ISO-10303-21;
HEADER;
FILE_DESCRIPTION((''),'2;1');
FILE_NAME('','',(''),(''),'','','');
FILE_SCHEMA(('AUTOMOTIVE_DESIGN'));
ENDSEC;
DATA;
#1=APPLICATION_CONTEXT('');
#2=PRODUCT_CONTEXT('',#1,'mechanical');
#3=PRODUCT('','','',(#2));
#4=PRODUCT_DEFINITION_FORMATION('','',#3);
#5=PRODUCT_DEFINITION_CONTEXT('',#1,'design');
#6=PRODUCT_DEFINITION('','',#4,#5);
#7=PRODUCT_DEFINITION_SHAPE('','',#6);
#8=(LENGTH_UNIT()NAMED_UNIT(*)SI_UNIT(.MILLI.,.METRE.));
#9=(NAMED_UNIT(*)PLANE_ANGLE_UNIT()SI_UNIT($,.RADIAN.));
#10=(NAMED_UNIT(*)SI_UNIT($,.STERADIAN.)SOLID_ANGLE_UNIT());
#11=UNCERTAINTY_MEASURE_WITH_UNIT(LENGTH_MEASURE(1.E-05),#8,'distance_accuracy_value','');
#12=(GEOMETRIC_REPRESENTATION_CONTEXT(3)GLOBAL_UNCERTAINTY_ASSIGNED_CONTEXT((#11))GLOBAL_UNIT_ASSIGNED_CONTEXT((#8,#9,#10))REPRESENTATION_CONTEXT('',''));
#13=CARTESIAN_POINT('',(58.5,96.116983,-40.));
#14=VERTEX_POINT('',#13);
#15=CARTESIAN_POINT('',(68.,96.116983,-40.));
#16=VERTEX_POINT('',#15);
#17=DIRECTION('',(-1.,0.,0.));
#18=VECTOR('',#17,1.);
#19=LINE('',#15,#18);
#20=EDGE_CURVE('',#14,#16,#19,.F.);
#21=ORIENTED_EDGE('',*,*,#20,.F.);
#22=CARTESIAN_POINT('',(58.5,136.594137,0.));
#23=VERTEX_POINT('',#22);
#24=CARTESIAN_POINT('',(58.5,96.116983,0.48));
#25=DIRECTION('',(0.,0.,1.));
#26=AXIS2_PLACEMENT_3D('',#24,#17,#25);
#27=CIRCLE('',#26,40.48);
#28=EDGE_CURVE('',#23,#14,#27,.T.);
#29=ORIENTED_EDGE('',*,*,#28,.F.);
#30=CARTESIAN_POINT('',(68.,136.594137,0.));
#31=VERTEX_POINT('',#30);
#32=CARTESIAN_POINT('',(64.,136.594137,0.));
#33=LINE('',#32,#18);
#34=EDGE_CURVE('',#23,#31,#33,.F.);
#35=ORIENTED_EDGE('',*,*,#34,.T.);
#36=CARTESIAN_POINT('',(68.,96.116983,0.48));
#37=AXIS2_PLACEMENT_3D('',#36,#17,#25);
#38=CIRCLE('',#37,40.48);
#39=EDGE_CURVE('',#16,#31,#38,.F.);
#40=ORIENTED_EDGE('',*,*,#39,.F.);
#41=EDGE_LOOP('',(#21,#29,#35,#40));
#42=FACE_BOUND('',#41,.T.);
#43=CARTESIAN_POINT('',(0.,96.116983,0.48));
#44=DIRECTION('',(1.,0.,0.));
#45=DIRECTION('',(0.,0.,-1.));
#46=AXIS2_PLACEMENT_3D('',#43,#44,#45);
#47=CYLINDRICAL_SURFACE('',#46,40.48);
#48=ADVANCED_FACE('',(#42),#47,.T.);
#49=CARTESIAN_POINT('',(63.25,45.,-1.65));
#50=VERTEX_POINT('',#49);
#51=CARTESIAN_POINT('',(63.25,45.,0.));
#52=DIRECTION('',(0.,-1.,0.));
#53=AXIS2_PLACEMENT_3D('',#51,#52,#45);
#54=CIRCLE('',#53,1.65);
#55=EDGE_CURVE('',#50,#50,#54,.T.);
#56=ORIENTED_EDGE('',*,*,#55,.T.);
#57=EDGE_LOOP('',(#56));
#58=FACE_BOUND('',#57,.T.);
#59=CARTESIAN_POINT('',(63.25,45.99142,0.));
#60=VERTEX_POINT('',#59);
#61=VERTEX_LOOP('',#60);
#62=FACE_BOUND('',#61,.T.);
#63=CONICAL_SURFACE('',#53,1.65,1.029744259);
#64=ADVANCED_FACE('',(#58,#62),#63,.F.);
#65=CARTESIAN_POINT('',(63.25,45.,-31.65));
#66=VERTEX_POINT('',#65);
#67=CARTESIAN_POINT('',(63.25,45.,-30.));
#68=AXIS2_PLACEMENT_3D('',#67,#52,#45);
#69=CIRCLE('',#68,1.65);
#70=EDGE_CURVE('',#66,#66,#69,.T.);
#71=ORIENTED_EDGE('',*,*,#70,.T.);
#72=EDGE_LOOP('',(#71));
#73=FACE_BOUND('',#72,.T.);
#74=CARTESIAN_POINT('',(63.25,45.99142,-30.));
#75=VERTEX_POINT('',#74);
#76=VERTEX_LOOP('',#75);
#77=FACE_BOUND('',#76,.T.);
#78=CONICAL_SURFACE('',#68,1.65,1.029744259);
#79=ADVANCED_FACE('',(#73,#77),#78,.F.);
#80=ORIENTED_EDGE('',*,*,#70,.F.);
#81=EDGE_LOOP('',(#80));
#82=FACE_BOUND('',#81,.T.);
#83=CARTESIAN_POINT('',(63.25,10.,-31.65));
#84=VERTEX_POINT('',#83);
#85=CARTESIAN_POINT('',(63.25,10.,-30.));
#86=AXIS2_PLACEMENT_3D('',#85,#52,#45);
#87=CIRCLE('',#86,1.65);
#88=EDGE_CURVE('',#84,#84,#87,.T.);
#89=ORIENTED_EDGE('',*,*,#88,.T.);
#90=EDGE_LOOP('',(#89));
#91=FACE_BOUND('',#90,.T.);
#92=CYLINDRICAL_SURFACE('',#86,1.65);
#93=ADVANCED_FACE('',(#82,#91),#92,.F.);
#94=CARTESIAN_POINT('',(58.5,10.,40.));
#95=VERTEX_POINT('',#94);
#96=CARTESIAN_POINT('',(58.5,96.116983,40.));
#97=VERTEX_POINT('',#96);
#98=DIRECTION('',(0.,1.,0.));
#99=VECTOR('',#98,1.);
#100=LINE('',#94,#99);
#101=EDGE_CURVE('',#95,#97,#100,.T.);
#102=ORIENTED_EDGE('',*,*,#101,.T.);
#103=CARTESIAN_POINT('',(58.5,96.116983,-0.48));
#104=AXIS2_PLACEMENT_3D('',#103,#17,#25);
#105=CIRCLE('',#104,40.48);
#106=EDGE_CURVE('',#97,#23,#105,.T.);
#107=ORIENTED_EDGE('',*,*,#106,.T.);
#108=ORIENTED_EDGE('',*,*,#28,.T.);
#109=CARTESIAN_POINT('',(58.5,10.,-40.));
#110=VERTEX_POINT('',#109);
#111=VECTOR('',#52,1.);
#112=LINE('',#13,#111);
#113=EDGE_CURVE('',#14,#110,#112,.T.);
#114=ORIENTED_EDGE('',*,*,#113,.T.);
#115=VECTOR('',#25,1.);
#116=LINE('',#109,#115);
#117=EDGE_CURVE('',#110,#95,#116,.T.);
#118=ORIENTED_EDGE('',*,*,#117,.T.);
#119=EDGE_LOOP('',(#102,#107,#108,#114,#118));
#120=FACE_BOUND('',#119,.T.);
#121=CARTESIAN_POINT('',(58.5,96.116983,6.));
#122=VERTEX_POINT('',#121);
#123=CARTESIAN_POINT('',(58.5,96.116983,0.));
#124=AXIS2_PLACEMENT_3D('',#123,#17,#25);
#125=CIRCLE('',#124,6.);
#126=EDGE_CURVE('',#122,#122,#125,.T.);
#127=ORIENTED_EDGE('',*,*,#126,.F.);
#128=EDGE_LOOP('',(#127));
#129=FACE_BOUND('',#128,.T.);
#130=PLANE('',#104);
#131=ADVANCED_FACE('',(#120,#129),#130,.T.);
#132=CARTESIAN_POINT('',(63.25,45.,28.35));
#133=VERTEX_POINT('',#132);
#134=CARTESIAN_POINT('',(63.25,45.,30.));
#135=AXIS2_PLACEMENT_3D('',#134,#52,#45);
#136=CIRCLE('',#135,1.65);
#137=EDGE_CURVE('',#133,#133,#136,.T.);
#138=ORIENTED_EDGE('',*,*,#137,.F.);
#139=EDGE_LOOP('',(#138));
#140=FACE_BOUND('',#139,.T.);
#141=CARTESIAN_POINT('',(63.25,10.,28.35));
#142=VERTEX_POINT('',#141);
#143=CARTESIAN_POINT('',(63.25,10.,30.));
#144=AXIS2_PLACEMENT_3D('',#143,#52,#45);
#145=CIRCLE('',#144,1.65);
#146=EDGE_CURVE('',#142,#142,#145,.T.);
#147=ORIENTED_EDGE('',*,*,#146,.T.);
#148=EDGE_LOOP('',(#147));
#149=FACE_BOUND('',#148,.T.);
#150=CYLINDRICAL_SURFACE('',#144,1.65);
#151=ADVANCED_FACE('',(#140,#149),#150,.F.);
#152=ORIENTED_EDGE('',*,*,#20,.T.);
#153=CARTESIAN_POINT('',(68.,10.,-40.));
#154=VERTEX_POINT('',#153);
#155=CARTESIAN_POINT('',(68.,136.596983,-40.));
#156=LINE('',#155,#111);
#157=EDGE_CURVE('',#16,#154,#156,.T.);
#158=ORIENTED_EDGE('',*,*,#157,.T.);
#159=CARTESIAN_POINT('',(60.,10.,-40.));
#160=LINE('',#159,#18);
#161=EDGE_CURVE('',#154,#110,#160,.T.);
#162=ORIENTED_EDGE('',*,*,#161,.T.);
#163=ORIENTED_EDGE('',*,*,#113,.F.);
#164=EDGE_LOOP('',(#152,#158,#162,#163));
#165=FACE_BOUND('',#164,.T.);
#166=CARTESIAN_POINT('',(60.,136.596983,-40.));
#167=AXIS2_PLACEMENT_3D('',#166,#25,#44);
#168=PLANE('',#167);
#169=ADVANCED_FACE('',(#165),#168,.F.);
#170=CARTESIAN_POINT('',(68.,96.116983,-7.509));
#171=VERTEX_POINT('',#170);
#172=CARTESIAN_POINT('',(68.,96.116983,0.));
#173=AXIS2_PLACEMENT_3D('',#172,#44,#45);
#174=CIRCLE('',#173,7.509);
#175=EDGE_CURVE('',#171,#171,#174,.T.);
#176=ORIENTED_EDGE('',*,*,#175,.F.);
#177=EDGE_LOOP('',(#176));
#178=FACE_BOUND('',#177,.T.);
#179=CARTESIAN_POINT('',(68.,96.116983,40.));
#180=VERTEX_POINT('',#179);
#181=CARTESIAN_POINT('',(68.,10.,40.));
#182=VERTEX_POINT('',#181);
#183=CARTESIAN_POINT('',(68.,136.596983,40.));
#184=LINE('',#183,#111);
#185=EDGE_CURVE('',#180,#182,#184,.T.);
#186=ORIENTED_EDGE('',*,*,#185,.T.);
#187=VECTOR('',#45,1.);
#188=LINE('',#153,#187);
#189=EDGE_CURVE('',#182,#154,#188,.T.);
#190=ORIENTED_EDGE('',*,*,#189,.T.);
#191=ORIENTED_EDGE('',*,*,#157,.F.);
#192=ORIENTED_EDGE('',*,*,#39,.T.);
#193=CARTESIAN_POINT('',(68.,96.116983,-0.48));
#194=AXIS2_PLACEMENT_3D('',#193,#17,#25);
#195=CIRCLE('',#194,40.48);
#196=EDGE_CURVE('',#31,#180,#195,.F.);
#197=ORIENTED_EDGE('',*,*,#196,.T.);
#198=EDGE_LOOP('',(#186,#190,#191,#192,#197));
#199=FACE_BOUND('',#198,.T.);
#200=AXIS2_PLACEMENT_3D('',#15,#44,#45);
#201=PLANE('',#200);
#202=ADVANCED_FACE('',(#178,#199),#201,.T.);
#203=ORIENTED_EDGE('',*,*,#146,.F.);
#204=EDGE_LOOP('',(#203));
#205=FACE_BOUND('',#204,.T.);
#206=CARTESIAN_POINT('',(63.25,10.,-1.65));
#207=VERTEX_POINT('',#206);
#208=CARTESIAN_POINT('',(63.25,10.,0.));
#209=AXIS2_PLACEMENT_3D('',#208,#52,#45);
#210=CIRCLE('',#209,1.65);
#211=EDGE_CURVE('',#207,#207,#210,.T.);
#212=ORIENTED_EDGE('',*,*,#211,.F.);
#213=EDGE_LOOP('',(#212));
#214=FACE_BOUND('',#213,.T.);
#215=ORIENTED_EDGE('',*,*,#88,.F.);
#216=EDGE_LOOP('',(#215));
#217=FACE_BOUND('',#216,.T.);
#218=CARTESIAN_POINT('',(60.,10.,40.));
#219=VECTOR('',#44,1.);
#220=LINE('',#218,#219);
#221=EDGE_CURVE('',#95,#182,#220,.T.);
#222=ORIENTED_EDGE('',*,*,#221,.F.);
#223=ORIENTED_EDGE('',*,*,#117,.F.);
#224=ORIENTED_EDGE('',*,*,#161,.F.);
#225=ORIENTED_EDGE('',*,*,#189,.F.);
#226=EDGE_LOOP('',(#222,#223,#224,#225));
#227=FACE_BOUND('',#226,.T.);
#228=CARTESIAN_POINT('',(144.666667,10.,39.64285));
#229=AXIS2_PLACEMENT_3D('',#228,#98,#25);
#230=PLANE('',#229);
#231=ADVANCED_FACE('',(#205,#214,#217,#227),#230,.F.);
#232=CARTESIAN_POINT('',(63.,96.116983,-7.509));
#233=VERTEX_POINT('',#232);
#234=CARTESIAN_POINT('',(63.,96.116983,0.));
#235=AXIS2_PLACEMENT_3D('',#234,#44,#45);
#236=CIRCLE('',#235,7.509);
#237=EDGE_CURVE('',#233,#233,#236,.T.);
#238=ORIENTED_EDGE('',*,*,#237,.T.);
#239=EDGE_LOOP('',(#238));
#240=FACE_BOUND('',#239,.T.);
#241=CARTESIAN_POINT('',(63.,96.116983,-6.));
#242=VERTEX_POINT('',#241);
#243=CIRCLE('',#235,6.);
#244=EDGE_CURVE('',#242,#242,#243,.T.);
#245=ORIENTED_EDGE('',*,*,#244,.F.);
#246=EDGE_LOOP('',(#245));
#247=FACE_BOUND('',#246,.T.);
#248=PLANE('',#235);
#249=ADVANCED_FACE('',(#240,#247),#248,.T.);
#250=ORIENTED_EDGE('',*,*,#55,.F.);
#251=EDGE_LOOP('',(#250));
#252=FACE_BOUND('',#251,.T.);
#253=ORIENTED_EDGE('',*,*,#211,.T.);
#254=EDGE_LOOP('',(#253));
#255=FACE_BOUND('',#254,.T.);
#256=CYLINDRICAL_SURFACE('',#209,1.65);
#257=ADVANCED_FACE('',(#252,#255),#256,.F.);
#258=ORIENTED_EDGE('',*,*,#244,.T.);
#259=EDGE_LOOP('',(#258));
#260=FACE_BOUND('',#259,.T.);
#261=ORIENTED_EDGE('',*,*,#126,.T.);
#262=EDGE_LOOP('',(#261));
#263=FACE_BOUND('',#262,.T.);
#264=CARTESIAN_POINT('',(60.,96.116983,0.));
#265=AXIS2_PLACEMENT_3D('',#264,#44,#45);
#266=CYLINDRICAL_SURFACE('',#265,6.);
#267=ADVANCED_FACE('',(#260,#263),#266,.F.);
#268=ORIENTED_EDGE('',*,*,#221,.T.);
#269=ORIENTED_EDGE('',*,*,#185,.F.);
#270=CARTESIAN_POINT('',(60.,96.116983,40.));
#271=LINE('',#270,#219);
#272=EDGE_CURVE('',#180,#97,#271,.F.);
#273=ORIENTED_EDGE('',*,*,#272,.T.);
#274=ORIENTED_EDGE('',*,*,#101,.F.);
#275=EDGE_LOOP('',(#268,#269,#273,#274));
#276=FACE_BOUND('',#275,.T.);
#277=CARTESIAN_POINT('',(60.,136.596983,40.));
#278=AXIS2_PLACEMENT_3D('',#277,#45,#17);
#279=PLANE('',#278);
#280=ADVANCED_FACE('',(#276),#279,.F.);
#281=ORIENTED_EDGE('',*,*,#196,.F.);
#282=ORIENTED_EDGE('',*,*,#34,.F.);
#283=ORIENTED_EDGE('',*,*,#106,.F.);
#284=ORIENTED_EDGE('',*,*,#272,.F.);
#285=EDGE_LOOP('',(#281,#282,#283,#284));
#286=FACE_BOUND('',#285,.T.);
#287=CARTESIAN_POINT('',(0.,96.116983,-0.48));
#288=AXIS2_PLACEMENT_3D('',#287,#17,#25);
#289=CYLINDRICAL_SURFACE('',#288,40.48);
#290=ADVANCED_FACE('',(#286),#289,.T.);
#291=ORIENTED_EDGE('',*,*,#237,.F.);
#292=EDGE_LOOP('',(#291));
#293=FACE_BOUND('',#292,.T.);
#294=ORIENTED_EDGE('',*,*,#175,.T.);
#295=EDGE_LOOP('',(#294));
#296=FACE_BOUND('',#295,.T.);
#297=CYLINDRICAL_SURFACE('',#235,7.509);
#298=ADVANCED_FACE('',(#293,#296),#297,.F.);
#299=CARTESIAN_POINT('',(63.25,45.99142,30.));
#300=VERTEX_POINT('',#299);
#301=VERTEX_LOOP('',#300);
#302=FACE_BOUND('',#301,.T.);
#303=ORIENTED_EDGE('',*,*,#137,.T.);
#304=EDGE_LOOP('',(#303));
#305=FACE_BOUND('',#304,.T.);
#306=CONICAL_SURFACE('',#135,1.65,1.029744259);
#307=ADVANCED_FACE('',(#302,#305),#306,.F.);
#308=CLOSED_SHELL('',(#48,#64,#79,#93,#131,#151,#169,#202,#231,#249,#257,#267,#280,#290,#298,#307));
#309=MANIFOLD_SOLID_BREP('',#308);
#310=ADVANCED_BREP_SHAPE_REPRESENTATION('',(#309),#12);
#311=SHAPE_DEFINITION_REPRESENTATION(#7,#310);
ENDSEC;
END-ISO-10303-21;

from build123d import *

# Parameters (mm, degrees)
STOCK_NEW_TRACKER_1_START = 60
STOCK_NEW_TRACKER_1_DEPTH = 8
SKETCH1_R                 = 7.509
CUT_EXTRUDE1_DEPTH        = 5
SKETCH2_R                 = 6
CUT_EXTRUDE2_DEPTH        = 143.418251296
BOSS_EXTRUDE1_START       = 1.5
SKETCH6_R                 = 6
BOSS_EXTRUDE1_DEPTH       = 1.5
M4X0_7_TAPPED_HOLE1_D     = 3.3
M4X0_7_TAPPED_HOLE1_DEPTH = 35
M4X0_7_TAPPED_HOLE1_TIP   = 0.991420021


# Read off the part's stored shape, not the designer's step: Stock-New_Tracker-1
with BuildPart() as part:
    # Stock-New_Tracker-1 outline → Stock-New_Tracker-1 (new body)
    with BuildSketch(Plane.YZ.offset(STOCK_NEW_TRACKER_1_START)):
        with BuildLine():
            Line((10, 40), (10, -40))
            Line((10, -40), (96.116983094, -40))
            ThreePointArc((96.116983094, -40), (124.570453884, -28.312888011), (136.594137144, 0))
            ThreePointArc((136.594137144, 0), (124.570453884, 28.312888011), (96.116983094, 40))
            Line((96.116983094, 40), (10, 40))
        make_face()
    extrude(amount=STOCK_NEW_TRACKER_1_DEPTH)

    # Sketch1 → Cut-Extrude1 (cut)
    with BuildSketch(Plane(origin=(68, 0, 0), x_dir=(0, 0, -1), z_dir=(1, 0, 0))):
        with Locations((0, 96.116983094)):
            Circle(SKETCH1_R)
    extrude(amount=-CUT_EXTRUDE1_DEPTH, mode=Mode.SUBTRACT)

    # Sketch2 → Cut-Extrude2 (cut, through all)
    with BuildSketch(Plane(origin=(63, 0, 0), x_dir=(0, 0, -1), z_dir=(1, 0, 0))):
        with Locations((0, 96.116983094)):
            Circle(SKETCH2_R)
    extrude(amount=-CUT_EXTRUDE2_DEPTH, mode=Mode.SUBTRACT)

    # Sketch6 → Boss-Extrude1 (add)
    with BuildSketch(Plane.ZY.offset(-60).offset(BOSS_EXTRUDE1_START)):
        with BuildLine():
            Line((-40, 96.116983094), (-40, 10))
            Line((-40, 10), (40, 10))
            Line((40, 10), (40, 96.116983094))
            ThreePointArc((40, 96.116983094), (28.312888011, 124.570453884), (0, 136.594137144))
            ThreePointArc((0, 136.594137144), (-28.312888011, 124.570453884), (-40, 96.116983094))
        make_face()
        with Locations(Location((0, 96.116983094, 0), (0, 0, 180))):
            Circle(SKETCH6_R, mode=Mode.SUBTRACT)
    extrude(amount=-BOSS_EXTRUDE1_DEPTH)

    # M4x0.7 Tapped Hole1
    with Locations(Plane(origin=(0, 10, 0), x_dir=(-1, 0, 0), z_dir=(0, -1, 0))):
        with Locations((-63.25, -30), (-63.25, 0), (-63.25, 30)):
            Hole(M4X0_7_TAPPED_HOLE1_D / 2, depth=M4X0_7_TAPPED_HOLE1_DEPTH)
            with Locations((0, 0, -(M4X0_7_TAPPED_HOLE1_DEPTH + M4X0_7_TAPPED_HOLE1_TIP / 2))):  # 118° drill point
                Cone(0, M4X0_7_TAPPED_HOLE1_D / 2, M4X0_7_TAPPED_HOLE1_TIP, mode=Mode.SUBTRACT)


solid = part.part
